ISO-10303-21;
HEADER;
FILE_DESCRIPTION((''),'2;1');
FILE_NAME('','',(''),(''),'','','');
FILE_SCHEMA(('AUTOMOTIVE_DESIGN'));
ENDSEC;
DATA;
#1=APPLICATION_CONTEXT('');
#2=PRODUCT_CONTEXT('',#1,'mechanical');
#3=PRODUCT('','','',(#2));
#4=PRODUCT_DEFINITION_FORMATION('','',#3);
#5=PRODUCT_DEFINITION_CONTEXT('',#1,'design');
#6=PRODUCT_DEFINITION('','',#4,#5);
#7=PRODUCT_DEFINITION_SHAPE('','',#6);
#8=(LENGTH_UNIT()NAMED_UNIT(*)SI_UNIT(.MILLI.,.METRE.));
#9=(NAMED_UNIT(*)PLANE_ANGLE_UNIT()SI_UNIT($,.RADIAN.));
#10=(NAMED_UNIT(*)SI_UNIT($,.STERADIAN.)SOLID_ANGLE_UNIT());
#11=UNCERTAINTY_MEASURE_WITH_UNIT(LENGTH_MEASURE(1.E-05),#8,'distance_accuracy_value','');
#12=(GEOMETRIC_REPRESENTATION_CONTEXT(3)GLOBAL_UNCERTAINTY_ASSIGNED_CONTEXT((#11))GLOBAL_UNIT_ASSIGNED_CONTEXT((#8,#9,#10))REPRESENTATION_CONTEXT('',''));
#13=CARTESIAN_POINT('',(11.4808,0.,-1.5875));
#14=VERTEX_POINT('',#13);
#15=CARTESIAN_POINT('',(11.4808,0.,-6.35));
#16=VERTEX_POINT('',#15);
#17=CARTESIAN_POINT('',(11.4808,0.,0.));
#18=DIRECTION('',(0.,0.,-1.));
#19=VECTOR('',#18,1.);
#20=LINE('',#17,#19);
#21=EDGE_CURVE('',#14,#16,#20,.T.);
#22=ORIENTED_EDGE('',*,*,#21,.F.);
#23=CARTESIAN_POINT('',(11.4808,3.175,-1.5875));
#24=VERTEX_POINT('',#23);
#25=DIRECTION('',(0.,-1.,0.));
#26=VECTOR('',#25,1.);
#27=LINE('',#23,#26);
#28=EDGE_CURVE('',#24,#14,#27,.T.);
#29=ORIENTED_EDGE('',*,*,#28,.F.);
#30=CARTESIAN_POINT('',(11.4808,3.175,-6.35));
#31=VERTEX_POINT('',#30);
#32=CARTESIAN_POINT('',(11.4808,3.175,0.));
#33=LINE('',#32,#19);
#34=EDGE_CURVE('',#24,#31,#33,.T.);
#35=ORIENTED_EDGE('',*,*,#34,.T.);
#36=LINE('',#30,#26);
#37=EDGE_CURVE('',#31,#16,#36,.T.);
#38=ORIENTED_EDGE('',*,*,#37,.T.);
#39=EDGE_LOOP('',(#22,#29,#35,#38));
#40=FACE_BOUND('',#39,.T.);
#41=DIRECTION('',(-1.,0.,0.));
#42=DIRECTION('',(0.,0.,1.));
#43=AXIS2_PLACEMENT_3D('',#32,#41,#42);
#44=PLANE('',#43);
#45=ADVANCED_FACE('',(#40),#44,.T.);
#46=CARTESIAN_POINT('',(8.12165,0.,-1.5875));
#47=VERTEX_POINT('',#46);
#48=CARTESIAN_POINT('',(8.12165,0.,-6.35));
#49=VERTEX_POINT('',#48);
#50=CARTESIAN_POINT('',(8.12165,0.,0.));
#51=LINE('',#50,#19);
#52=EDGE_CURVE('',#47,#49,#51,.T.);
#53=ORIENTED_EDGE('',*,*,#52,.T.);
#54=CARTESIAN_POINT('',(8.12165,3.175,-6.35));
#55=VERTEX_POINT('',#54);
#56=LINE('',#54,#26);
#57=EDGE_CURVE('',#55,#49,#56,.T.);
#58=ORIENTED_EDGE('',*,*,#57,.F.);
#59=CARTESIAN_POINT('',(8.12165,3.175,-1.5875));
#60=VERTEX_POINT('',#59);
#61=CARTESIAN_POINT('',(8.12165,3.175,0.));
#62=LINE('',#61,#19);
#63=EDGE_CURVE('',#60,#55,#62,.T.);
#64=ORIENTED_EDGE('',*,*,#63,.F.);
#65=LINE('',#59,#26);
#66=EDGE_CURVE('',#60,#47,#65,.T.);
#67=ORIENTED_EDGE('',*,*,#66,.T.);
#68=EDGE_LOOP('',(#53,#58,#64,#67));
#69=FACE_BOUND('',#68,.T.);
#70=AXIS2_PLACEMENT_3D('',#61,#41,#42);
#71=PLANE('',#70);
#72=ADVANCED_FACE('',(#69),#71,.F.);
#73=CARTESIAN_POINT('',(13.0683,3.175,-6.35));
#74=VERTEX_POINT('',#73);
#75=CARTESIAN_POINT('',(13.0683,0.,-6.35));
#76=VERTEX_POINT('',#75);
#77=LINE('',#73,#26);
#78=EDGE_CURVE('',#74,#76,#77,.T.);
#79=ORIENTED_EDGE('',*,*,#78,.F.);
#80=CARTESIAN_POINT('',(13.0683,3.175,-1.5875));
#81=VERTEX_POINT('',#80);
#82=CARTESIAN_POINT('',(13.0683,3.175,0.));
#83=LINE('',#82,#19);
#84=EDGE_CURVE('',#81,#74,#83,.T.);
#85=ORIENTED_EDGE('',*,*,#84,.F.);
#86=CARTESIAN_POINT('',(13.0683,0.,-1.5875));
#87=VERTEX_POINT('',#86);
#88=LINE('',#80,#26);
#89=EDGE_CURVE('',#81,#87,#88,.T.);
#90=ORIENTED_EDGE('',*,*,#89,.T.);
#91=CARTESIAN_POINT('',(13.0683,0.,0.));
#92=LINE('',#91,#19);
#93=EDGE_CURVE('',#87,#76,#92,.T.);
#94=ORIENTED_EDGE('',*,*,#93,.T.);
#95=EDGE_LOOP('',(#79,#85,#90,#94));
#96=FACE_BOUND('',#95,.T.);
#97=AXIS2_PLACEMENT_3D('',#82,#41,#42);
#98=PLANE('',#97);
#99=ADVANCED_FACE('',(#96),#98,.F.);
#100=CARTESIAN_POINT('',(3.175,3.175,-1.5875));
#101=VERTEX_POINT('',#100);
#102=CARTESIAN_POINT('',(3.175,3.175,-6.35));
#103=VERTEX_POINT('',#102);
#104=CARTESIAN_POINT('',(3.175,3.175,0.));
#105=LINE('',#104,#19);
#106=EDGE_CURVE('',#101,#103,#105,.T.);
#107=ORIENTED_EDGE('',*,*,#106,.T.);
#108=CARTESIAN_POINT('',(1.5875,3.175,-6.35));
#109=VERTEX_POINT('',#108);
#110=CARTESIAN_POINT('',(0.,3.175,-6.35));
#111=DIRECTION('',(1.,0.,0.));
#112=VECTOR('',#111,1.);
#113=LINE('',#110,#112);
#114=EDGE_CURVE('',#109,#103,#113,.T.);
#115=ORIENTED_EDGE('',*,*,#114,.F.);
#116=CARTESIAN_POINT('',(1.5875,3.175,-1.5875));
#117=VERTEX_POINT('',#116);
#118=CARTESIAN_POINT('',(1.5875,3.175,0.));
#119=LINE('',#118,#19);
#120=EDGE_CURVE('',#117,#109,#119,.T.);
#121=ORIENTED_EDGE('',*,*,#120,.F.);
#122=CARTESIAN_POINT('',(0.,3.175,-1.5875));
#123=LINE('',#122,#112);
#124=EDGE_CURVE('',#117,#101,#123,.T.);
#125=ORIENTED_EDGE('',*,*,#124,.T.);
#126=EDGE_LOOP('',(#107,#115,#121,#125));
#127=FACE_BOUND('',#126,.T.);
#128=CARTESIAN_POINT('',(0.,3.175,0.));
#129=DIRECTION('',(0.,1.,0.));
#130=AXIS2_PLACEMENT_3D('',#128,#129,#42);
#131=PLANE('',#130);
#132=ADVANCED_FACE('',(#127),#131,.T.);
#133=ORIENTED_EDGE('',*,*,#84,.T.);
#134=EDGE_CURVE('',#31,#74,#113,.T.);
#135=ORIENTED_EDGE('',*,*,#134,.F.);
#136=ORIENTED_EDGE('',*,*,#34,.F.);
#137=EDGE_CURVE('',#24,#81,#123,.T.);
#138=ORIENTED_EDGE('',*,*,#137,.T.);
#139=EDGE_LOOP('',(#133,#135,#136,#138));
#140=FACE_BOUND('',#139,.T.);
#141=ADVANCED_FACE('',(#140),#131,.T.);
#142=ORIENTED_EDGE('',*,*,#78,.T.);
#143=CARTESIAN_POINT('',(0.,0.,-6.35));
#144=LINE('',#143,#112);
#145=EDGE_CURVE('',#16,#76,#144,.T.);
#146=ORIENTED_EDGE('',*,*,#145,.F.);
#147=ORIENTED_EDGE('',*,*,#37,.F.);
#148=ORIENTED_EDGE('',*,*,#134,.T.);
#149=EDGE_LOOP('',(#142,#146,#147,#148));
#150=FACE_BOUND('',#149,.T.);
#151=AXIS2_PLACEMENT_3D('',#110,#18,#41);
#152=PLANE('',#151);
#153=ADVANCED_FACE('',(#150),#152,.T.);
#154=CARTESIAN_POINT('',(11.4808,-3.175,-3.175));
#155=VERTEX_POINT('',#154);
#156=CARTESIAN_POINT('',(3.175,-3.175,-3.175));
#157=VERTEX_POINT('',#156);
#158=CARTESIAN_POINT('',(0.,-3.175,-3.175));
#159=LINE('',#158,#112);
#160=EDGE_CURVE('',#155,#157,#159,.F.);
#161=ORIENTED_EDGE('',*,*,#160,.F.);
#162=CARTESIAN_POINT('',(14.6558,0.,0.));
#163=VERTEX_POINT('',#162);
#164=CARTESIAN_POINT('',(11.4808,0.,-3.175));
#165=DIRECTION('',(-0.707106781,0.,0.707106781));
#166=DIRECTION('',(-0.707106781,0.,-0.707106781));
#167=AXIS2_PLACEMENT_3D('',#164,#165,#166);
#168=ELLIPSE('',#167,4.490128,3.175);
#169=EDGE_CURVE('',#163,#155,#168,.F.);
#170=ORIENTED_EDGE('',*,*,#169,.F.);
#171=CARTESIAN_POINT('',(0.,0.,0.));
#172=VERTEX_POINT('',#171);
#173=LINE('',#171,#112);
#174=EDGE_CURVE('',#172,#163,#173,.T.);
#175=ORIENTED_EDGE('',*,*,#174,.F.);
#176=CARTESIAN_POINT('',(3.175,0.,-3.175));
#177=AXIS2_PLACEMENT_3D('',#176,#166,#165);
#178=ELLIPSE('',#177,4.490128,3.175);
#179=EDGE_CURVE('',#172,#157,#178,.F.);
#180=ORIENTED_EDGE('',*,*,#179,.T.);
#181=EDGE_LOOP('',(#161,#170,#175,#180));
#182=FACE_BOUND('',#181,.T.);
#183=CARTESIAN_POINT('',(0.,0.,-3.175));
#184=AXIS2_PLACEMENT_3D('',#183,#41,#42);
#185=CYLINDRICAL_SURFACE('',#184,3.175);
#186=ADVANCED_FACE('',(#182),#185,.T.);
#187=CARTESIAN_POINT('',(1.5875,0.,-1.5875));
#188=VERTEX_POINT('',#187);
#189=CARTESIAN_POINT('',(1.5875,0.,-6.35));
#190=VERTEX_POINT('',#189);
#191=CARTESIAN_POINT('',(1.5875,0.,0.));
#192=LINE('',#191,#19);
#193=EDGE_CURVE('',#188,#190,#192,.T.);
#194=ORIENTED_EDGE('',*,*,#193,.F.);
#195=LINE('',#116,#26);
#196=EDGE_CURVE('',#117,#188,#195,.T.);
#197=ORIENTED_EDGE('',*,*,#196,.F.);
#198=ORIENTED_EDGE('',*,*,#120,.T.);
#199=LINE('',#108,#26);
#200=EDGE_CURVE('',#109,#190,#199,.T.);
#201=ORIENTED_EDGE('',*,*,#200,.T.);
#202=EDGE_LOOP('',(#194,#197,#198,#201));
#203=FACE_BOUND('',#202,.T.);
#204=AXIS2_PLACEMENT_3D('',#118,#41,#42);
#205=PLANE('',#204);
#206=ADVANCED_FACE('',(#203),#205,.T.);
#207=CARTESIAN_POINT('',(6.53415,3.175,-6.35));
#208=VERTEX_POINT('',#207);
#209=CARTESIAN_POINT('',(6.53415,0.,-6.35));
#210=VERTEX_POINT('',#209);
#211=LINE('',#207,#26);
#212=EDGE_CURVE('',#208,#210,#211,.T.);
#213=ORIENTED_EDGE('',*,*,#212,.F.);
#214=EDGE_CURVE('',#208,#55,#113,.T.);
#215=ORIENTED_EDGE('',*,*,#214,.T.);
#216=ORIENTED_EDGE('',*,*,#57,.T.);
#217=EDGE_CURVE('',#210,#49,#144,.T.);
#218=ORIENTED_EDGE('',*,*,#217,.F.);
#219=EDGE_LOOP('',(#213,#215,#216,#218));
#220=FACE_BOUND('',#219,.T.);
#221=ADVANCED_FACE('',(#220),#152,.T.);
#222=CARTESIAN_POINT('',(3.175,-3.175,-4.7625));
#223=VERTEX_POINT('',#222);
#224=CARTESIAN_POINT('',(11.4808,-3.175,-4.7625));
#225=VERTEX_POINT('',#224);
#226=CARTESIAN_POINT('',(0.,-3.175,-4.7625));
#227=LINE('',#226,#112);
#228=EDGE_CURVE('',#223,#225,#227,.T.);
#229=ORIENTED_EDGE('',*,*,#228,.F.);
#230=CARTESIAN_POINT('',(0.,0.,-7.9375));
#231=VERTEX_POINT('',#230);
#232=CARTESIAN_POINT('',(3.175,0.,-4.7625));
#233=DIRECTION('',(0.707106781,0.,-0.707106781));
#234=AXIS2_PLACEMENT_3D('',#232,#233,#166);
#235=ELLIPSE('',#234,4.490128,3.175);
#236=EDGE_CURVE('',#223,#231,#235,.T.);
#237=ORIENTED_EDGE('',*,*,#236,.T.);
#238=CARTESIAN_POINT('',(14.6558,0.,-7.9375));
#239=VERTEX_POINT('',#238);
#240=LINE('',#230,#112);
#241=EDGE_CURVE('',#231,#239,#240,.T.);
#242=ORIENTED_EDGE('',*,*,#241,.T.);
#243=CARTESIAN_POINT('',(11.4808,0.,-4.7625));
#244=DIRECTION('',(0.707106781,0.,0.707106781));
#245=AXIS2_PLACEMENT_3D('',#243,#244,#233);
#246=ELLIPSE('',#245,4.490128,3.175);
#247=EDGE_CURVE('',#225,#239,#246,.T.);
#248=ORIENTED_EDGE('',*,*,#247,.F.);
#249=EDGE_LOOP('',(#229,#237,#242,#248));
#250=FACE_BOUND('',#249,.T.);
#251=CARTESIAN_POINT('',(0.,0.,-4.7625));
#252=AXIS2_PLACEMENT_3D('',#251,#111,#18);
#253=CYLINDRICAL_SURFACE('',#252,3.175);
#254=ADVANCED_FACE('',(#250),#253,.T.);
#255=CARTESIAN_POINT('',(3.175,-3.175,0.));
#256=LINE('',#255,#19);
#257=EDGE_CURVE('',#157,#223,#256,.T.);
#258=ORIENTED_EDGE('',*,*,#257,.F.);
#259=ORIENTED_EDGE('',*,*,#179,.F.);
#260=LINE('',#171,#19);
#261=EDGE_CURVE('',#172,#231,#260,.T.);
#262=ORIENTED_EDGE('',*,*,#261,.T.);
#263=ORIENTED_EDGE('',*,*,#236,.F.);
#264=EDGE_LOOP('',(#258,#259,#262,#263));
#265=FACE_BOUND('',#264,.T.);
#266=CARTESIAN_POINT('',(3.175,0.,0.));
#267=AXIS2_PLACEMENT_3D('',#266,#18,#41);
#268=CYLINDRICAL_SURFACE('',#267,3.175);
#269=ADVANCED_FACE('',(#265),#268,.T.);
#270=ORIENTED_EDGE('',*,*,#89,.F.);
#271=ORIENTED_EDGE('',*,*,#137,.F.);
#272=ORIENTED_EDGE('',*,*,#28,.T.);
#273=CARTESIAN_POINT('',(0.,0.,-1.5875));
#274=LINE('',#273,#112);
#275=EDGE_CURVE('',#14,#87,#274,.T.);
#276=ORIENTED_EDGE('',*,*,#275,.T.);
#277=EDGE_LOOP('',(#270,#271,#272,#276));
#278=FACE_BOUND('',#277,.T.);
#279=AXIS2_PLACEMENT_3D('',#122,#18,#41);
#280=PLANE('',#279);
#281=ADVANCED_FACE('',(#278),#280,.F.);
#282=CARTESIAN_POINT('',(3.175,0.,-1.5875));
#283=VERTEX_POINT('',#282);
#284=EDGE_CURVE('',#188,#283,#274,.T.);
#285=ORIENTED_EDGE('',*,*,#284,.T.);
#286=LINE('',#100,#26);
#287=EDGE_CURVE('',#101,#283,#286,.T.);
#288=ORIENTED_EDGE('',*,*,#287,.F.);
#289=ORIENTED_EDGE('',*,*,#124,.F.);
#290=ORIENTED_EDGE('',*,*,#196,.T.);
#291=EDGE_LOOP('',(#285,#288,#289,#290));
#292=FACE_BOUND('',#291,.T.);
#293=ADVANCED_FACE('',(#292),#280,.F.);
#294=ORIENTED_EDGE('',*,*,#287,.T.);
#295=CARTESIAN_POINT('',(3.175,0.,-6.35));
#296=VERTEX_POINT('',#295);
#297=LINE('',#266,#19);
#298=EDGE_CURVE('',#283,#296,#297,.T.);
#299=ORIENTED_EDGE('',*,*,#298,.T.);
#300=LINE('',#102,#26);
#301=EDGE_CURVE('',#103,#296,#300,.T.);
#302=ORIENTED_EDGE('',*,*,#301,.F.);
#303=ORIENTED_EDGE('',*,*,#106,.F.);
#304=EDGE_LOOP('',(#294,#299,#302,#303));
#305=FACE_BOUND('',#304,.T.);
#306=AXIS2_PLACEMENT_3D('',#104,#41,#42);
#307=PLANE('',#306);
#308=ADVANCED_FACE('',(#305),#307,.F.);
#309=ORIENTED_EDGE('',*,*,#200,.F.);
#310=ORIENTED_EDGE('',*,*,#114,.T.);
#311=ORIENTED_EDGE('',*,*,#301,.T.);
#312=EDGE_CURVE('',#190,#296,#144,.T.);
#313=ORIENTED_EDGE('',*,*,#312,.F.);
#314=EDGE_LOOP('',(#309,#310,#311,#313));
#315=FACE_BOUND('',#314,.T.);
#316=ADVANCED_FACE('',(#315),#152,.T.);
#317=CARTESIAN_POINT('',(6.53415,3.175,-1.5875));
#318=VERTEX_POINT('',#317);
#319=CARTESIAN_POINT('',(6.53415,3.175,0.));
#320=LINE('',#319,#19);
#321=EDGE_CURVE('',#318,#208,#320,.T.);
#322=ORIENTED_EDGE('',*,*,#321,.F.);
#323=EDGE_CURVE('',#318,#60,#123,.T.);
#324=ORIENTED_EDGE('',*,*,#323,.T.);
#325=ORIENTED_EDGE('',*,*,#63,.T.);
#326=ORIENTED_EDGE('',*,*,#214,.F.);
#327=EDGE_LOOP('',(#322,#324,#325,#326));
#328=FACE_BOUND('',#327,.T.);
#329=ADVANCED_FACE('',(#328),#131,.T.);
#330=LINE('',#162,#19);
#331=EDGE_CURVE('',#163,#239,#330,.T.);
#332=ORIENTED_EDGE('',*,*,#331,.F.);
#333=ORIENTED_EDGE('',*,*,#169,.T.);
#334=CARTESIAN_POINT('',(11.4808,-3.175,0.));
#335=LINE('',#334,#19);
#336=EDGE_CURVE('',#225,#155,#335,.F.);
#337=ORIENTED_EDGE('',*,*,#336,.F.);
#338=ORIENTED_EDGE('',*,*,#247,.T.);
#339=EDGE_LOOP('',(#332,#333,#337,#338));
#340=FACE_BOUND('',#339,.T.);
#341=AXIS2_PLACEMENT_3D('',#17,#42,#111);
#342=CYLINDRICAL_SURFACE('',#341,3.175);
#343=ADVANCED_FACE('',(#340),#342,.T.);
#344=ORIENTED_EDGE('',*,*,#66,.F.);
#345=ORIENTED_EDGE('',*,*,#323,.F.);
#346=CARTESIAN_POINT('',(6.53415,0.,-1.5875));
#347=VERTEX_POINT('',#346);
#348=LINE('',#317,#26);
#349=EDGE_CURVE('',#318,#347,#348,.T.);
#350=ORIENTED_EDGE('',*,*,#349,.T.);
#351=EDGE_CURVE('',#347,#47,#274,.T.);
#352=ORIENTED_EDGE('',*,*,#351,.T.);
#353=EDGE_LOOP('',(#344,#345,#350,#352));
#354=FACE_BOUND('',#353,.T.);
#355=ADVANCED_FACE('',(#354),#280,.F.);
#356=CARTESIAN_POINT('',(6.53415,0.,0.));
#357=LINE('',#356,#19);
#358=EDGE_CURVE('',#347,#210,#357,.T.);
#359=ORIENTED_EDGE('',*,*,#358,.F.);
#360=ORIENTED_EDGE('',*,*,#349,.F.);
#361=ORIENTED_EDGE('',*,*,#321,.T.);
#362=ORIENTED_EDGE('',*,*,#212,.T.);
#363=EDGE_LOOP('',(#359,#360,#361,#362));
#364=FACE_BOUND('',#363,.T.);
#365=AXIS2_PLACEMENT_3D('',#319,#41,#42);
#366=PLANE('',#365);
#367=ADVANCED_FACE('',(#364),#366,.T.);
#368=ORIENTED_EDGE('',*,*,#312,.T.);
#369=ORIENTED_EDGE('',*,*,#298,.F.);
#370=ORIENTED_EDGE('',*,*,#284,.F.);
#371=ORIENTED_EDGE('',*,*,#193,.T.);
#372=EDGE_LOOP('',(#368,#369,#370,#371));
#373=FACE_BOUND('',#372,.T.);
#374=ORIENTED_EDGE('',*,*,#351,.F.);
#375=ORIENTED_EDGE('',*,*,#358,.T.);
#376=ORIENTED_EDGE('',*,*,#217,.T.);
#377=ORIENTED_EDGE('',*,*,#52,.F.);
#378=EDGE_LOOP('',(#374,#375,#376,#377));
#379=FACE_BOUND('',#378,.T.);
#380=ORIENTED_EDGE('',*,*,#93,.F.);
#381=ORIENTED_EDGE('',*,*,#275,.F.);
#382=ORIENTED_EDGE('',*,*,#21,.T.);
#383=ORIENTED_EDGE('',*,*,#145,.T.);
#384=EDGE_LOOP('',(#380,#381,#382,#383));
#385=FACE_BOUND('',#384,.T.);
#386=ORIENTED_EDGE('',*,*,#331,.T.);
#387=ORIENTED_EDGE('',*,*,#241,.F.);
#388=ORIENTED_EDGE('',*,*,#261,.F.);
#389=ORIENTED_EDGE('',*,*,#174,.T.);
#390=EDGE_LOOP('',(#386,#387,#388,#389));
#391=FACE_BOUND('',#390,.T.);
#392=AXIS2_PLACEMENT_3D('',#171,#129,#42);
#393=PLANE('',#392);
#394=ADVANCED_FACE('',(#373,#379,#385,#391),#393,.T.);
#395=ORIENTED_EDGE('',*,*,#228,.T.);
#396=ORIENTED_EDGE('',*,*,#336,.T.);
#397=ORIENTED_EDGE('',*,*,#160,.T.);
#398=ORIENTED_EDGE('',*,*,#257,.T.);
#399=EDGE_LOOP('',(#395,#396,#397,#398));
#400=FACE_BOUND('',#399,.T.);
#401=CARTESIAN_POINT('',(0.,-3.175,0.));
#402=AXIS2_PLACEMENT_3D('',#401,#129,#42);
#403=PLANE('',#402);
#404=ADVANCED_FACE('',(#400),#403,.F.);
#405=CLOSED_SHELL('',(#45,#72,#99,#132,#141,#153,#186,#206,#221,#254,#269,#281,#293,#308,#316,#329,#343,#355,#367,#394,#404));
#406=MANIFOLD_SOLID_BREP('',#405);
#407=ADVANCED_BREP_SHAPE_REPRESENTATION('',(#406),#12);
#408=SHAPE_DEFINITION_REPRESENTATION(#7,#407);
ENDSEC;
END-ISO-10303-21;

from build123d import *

# Parameters (mm, degrees)
SKETCH1_W           = 14.6558
SKETCH1_H           = 7.9375
SKETCH1_W_2         = 1.5875
SKETCH1_H_2         = 4.7625
BOSS_EXTRUDE1_DEPTH = 3.175
SKETCH1_3_W         = 1.5875
SKETCH1_3_H         = 4.7625
BOSS_EXTRUDE2_DEPTH = 3.175
FILLET1_R           = 3.175


with BuildPart() as part:
    # Sketch1 → Boss-Extrude1 (new body)
    # profile 1 of 4: a face of its own
    with BuildSketch(Plane(origin=(0, 0, 0), x_dir=(1, 0, 0), z_dir=(0, 1, 0))):
        with Locations((7.3279, 3.96875)):
            Rectangle(SKETCH1_W, SKETCH1_H)
        with Locations((12.27455, 3.96875)):
            Rectangle(SKETCH1_W_2, SKETCH1_H_2, mode=Mode.SUBTRACT)
        with Locations((7.3279, 3.96875)):
            Rectangle(SKETCH1_W_2, SKETCH1_H_2, mode=Mode.SUBTRACT)
        with Locations((2.38125, 3.96875)):
            Rectangle(SKETCH1_W_2, SKETCH1_H_2, mode=Mode.SUBTRACT)
    # profile 2 of 4: a face of its own
    with BuildSketch(Plane(origin=(0, 0, 0), x_dir=(1, 0, 0), z_dir=(0, 1, 0))):
        with Locations((2.38125, 3.96875)):
            Rectangle(SKETCH1_W_2, SKETCH1_H_2)
    # profile 3 of 4: a face of its own
    with BuildSketch(Plane(origin=(0, 0, 0), x_dir=(1, 0, 0), z_dir=(0, 1, 0))):
        with Locations((7.3279, 3.96875)):
            Rectangle(SKETCH1_W_2, SKETCH1_H_2)
    # profile 4 of 4: a face of its own
    with BuildSketch(Plane(origin=(0, 0, 0), x_dir=(1, 0, 0), z_dir=(0, 1, 0))):
        with Locations((12.27455, 3.96875)):
            Rectangle(SKETCH1_W_2, SKETCH1_H_2)
    extrude(amount=-BOSS_EXTRUDE1_DEPTH)

    # Sketch1<3> → Boss-Extrude2 (add)
    with BuildSketch(Plane(origin=(0, 0, 0), x_dir=(1, 0, 0), z_dir=(0, 1, 0))):
        with Locations((2.38125, 3.96875)):
            Rectangle(SKETCH1_3_W, SKETCH1_3_H)
        with Locations((7.3279, 3.96875)):
            Rectangle(SKETCH1_3_W, SKETCH1_3_H)
        with Locations((12.27455, 3.96875)):
            Rectangle(SKETCH1_3_W, SKETCH1_3_H)
    extrude(amount=BOSS_EXTRUDE2_DEPTH)

    # Fillet1
    fillet1_edges = [part.edges().sort_by_distance(p)[0] for p in [
        (14.6558, -3.175, -3.96875),
        (7.3279, -3.175, -7.9375),
        (0, -3.175, -3.96875),
        (7.3279, -3.175, 0),
    ]]
    fillet(fillet1_edges, radius=FILLET1_R - 0.0001)  # a hair under: the kernel refuses the full size


solid = part.part
